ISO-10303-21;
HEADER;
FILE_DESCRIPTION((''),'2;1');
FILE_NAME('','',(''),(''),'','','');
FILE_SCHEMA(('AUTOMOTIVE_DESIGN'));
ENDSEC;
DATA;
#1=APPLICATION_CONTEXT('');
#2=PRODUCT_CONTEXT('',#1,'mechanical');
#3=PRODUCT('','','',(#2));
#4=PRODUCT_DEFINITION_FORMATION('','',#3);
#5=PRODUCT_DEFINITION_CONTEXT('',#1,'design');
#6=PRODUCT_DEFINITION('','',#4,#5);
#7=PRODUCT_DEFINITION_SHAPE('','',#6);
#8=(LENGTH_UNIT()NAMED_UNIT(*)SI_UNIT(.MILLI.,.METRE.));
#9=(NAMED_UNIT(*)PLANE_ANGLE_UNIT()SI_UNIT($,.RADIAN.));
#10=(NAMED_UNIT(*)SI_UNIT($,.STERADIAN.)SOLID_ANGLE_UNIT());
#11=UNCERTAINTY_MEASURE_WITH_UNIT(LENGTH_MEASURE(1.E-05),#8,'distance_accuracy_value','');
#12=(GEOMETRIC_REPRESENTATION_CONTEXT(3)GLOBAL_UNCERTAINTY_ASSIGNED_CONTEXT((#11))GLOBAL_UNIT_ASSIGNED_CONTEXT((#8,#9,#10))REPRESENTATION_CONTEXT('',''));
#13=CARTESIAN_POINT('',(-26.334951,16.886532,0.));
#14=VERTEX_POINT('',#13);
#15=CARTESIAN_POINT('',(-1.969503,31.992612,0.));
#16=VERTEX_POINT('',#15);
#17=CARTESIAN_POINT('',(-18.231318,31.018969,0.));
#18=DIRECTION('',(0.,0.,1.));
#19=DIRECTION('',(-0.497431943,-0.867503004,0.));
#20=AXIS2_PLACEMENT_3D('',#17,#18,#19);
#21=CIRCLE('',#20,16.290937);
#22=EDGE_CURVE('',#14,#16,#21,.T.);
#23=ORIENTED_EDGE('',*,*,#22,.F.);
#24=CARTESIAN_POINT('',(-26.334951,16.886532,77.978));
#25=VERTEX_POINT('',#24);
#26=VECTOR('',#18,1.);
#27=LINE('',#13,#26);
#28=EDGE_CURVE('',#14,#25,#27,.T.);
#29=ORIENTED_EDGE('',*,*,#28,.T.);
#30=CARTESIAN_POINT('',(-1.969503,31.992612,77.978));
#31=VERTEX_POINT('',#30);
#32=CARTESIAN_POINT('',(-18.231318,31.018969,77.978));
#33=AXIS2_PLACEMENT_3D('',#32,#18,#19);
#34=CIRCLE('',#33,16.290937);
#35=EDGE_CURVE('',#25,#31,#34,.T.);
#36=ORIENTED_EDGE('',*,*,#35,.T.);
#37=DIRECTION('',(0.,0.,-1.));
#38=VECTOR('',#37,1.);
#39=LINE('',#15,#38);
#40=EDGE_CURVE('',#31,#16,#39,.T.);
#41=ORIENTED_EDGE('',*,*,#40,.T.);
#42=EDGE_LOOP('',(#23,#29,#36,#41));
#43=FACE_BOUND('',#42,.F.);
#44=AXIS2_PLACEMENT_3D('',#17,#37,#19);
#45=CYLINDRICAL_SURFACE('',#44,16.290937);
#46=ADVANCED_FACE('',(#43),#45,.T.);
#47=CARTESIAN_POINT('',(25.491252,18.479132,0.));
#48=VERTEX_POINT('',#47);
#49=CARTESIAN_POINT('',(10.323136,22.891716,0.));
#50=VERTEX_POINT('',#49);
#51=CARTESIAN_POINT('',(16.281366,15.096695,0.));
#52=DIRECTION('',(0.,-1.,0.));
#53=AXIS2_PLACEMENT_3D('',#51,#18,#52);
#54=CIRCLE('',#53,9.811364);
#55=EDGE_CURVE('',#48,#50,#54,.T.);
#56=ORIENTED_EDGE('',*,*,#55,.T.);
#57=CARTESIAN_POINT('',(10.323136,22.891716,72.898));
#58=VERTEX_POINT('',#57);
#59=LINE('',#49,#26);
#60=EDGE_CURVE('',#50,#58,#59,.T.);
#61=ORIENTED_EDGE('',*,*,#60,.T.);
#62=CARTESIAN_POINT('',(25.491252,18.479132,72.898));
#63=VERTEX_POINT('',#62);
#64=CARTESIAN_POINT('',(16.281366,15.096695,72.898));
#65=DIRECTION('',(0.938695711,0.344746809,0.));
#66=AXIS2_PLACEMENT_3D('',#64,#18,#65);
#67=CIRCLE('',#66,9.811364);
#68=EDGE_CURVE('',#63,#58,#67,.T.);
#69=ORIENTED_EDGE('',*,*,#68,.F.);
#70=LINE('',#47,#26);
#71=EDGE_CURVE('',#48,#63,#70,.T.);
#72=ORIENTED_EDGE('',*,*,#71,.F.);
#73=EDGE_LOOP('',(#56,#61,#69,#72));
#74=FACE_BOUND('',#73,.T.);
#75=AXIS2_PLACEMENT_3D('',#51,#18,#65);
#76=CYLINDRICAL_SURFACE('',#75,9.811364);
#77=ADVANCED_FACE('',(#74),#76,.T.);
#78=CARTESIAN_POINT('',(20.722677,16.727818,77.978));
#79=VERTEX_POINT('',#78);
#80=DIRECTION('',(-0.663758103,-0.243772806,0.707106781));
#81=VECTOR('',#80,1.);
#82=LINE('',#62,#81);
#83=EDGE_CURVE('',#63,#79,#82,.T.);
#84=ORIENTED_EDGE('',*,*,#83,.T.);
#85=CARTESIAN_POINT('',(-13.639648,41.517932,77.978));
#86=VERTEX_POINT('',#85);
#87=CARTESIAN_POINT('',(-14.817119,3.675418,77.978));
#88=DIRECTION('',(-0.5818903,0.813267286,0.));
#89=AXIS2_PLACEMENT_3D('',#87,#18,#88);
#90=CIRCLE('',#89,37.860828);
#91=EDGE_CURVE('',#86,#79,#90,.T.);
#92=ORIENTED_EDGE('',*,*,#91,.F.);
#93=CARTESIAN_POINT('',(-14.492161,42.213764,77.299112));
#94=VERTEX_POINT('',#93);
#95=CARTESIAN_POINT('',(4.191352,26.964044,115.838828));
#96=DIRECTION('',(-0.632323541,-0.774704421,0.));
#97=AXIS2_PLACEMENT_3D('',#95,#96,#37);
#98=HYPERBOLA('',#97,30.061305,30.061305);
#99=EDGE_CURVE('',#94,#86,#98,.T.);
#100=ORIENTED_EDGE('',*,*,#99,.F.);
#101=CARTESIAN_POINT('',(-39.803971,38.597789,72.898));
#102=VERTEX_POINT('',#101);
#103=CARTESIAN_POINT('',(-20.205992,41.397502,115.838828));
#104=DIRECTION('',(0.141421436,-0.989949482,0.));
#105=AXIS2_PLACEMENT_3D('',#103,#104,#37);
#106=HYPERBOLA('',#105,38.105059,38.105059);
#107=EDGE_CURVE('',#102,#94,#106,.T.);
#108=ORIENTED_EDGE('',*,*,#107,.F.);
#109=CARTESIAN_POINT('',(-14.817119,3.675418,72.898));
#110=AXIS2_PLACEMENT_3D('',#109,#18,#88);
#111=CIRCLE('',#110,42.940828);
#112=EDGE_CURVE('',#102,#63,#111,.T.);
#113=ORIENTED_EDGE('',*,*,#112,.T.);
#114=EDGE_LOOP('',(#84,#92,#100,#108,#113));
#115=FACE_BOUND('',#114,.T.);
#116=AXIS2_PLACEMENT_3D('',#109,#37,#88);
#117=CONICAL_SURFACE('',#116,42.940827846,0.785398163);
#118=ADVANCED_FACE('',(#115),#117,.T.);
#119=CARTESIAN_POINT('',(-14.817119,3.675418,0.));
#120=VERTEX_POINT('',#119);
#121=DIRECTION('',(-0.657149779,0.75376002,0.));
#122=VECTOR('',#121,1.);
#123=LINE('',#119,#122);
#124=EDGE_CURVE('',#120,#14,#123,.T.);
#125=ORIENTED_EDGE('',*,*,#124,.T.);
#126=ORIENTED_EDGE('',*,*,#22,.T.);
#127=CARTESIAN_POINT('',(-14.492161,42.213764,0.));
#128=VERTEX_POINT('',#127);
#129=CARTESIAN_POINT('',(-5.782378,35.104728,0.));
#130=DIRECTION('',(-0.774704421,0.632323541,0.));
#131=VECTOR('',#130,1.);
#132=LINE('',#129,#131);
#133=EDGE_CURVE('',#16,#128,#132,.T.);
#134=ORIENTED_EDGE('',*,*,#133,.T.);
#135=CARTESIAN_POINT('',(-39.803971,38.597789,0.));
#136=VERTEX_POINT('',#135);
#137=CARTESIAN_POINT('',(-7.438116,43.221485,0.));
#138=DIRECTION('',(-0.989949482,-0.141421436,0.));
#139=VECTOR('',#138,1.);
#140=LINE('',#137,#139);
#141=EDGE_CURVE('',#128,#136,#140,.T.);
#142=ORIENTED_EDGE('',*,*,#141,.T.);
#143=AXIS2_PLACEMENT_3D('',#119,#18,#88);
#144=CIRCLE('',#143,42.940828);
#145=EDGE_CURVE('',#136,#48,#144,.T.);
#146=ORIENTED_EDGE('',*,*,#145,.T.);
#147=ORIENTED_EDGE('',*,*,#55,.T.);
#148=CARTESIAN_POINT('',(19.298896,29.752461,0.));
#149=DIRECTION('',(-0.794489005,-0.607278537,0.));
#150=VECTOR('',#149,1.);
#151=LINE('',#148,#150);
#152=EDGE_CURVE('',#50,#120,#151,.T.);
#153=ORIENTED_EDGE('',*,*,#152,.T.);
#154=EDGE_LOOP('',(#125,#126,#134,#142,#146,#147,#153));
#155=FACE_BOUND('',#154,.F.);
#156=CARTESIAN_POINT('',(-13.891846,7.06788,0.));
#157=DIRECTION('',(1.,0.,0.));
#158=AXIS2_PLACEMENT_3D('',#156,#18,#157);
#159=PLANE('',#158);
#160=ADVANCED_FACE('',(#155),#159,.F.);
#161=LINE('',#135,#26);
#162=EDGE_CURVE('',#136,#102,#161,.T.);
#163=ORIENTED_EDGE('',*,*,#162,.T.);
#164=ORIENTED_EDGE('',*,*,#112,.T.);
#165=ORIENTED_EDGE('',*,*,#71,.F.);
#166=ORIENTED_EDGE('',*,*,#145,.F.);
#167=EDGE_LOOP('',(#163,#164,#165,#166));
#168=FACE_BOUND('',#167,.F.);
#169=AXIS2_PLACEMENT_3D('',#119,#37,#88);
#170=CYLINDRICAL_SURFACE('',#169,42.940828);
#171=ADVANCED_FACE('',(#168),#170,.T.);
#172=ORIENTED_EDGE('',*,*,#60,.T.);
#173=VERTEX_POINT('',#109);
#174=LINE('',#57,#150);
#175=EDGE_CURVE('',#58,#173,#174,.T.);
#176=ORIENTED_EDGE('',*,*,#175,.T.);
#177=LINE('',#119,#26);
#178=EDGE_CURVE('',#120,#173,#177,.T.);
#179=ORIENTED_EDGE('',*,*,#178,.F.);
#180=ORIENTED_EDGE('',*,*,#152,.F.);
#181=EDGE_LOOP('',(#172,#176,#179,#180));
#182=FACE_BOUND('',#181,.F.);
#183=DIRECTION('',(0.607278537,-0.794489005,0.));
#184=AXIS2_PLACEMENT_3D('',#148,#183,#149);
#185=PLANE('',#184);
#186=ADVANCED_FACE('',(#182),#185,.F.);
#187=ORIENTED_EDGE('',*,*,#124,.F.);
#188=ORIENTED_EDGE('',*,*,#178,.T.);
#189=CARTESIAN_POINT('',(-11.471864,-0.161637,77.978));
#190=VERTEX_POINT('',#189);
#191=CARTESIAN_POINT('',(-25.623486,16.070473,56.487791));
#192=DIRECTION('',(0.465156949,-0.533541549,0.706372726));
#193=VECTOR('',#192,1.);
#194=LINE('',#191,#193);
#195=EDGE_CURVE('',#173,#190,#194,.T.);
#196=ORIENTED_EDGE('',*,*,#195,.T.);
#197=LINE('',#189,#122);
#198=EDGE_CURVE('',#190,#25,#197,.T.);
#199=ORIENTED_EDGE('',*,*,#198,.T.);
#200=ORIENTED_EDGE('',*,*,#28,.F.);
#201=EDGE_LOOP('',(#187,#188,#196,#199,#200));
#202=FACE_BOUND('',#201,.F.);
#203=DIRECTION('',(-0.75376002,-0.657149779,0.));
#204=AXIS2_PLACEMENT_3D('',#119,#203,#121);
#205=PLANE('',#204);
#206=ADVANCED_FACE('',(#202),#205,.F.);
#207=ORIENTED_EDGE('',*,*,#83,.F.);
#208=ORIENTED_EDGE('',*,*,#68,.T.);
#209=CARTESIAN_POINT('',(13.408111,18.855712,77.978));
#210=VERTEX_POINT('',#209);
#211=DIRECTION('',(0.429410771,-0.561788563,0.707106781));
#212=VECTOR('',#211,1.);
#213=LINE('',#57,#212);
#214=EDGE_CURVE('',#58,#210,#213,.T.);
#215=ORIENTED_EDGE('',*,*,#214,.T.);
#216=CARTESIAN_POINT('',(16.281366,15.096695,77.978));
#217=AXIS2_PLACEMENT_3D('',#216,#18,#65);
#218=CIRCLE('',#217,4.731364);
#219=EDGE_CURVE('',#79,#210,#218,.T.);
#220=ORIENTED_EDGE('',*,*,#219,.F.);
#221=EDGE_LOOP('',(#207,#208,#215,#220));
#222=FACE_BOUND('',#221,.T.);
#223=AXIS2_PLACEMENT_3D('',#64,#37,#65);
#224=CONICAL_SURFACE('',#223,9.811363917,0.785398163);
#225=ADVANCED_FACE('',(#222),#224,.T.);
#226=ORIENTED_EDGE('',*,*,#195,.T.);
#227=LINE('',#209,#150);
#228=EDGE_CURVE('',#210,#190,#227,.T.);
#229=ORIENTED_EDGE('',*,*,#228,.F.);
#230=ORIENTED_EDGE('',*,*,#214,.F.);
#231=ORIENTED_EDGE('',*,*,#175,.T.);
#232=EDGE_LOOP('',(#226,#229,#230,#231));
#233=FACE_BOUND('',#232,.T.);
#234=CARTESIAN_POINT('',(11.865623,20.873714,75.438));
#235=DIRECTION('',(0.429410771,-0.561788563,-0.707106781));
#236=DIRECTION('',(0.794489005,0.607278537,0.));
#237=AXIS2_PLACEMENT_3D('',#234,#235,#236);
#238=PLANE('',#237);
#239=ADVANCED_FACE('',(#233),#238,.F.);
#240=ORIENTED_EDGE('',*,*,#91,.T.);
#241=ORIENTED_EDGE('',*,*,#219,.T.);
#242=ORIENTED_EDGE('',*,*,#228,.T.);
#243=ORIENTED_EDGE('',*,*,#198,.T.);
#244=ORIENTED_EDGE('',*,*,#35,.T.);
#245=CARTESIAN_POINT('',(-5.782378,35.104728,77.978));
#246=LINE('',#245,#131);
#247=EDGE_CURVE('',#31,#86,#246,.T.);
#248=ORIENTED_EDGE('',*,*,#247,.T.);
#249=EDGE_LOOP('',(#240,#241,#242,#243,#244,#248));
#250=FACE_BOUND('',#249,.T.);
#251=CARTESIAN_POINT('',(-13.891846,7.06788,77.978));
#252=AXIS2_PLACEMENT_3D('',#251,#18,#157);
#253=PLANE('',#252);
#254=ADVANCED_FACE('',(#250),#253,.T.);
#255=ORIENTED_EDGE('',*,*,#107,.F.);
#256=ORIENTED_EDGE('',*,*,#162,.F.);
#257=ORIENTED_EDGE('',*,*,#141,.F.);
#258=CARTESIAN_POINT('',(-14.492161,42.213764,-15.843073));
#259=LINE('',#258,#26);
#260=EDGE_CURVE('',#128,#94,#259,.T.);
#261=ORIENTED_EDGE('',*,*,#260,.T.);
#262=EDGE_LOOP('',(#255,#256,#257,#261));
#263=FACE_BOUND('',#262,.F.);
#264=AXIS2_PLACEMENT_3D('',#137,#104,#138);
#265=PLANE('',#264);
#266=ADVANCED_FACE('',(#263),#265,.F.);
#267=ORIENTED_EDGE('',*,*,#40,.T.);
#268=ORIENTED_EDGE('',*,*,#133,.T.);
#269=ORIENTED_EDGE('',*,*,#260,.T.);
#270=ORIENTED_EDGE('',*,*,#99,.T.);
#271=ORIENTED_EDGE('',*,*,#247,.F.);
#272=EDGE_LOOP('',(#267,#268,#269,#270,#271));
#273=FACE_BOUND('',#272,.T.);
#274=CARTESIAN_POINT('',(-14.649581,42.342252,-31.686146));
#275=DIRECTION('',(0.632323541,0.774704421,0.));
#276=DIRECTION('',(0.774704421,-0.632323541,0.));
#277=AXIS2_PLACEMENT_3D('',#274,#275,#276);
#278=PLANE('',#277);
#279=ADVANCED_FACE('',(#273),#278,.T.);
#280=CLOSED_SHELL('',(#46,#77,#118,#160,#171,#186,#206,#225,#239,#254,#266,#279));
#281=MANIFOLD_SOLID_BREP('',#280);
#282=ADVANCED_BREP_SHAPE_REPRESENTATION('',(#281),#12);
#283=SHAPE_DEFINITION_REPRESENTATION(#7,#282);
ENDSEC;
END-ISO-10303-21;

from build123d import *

# Parameters (mm, degrees)
F1_DEPTH    = 77.978
F2_R        = 9.8113639175
F3_T1_DEPTH = 141.3502926448
F4_SIZE     = 5.08


# Not quite as in the source:
# - a fillet or chamfer that OpenCascade refuses, or shapes differently, is made with other operations: its cross-section is extruded or revolved along the edge and cut away or added


with BuildPart() as f1:
    # F0 (on Top) → F1 (new body)
    with BuildSketch(Plane.XY):
        with BuildLine():
            Line((-7.4381157756, 43.2214848697), (-39.8039706051, 38.5977886617))
            ThreePointArc((-39.8039706051, 38.5977886617), (-21.172854192, -38.7924441896), (19.2988961935, 29.7524612397))
            Line((19.2988961935, 29.7524612397), (-14.8171193926, 3.6754181444))
            Line((-14.8171193926, 3.6754181444), (-26.3349507004, 16.8865323067))
            ThreePointArc((-26.3349507004, 16.8865323067), (-4.9953492686, 21.5214038686), (-7.4381157756, 43.2214848697))
        make_face()
    extrude(amount=F1_DEPTH)

    # F2
    f2_edges = [f1.edges().sort_by_distance(p)[0] for p in [
        (19.298896, 29.752461, 38.989),
    ]]
    fillet(f2_edges, radius=F2_R)

    # F3: chamfer of 5.08 on 1 edges, made by hand

    # F3_s2 → F3_t1 (cut)
    with BuildSketch(Plane.XY.offset(-31.6861463224)):
        with BuildLine():
            Line((-14.6495810062, 42.3422516773), (-1.8120830861, 31.8641235926))
            Line((-1.8120830861, 31.8641235926), (-1.7106647042, 31.8701958104))
            ThreePointArc((-1.7106647042, 31.8701958104), (-3.4500397911, 38.1062153929), (-7.3708029252, 43.2975870391))
            Line((-7.3708029252, 43.2975870391), (-7.4524841935, 43.3220637371))
            ThreePointArc((-7.4524841935, 43.3220637371), (-11.0476484326, 42.8084685502), (-14.663949424, 42.4428305447))
            Line((-14.663949424, 42.4428305447), (-14.6495810062, 42.3422516773))
        make_face()
    extrude(amount=F3_T1_DEPTH, mode=Mode.SUBTRACT)

    # F4
    f4_edges = [f1.edges().sort_by_distance(p)[0] for p in [
        (-27.46138, -37.361606, 77.978),
        (19.021994, 24.517514, 77.978),
        (-2.246992, 13.283567, 77.978),
    ]]
    chamfer(f4_edges, length=F4_SIZE)


solid = f1.part
